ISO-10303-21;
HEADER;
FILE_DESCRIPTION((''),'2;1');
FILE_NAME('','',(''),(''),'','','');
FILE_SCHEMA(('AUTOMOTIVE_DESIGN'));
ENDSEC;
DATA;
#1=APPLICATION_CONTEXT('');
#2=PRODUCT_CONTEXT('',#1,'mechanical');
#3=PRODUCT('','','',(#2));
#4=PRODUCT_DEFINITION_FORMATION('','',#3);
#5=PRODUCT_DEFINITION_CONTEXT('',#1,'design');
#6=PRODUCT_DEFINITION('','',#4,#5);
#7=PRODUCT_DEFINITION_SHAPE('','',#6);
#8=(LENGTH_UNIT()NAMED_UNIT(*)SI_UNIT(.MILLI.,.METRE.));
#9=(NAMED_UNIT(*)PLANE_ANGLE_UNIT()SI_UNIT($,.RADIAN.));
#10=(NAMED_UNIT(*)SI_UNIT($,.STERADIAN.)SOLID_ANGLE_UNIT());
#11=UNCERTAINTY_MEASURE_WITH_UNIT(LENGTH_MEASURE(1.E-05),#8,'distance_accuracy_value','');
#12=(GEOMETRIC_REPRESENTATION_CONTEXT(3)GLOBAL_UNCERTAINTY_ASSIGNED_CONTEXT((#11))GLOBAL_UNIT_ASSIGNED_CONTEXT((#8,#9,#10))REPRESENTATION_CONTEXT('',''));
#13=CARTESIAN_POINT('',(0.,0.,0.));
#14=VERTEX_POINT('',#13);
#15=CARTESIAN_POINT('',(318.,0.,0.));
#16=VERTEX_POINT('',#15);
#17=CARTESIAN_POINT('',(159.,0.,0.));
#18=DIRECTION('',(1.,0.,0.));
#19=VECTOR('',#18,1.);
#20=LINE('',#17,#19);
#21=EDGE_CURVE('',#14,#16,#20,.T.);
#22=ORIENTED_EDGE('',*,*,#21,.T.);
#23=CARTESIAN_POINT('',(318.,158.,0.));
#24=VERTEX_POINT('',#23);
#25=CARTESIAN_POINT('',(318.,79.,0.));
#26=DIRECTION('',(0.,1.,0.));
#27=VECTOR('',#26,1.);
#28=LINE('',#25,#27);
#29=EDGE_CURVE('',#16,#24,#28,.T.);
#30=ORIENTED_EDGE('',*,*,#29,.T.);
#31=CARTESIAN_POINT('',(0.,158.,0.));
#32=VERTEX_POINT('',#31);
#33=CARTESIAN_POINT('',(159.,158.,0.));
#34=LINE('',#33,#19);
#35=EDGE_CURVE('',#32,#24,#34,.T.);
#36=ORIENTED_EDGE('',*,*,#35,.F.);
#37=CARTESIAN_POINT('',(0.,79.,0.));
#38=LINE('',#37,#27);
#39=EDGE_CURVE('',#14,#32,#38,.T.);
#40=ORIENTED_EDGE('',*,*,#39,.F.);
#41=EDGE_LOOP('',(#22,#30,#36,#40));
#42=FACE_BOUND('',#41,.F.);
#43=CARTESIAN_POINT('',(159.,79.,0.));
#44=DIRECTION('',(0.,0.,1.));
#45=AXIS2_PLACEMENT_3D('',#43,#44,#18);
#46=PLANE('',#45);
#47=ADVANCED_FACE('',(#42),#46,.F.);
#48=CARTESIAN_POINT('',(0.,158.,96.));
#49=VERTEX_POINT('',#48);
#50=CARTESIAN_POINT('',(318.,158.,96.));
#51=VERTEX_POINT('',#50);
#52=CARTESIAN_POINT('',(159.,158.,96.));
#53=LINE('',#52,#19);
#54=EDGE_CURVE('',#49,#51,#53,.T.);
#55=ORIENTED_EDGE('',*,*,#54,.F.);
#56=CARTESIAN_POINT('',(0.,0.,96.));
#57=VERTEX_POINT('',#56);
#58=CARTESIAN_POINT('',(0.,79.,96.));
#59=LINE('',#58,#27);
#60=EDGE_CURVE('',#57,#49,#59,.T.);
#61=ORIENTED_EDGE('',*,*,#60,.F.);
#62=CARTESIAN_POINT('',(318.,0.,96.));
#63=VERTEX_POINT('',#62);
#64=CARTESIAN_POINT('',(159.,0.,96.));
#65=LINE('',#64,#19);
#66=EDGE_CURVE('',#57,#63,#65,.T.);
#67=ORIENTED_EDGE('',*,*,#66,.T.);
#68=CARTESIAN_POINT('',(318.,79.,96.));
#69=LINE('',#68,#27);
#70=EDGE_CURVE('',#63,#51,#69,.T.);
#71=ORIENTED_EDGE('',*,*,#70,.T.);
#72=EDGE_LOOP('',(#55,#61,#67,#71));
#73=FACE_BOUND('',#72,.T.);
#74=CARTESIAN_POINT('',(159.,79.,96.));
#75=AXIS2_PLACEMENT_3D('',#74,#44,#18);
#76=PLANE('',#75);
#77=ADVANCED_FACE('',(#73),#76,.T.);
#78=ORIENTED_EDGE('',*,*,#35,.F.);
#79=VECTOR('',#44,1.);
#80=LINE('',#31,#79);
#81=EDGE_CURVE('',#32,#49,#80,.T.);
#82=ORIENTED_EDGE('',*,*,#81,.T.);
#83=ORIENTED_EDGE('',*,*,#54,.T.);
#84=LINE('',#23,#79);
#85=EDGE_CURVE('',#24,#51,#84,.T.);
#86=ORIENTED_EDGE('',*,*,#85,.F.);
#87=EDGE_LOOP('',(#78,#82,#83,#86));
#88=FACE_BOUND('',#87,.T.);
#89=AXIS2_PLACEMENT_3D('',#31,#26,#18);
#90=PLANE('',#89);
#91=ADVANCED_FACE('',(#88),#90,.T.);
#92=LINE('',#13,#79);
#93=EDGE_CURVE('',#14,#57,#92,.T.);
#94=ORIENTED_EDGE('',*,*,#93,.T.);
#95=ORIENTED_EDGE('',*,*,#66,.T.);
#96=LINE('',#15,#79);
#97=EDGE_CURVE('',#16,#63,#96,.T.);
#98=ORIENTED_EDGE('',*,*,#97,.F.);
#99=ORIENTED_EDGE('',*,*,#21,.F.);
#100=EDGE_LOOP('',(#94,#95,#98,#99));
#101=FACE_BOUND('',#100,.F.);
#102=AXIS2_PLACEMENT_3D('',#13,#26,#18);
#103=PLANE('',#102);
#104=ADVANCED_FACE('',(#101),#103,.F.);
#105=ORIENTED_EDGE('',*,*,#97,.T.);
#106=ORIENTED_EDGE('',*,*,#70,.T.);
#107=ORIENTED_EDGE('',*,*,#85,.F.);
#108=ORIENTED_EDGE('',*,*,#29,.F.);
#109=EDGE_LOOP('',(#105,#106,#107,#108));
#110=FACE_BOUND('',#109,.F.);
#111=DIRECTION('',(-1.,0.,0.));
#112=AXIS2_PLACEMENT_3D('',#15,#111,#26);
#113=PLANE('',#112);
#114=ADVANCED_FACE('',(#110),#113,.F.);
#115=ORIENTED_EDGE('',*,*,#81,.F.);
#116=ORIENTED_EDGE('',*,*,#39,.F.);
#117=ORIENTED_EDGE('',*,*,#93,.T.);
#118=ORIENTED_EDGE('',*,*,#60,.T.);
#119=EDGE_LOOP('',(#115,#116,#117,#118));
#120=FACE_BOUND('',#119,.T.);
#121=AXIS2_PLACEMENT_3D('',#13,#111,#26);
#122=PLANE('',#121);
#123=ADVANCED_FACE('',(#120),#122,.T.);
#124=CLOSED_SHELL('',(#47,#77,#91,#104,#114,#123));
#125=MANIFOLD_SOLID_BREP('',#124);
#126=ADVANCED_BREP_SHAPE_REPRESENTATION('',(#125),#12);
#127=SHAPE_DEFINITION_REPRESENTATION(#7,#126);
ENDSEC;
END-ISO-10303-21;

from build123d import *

# Parameters (mm, degrees)
F0_W     = 318
F0_H     = 158
F0_R     = 24
F1_DEPTH = 96


# Not quite as in the source:
# - a feature of the source that left no trace in its solid (it failed there, or was rolled back) is left out


with BuildPart() as f1:
    # F0 (on Top) → F1 (new body)
    with BuildSketch(Plane.XY):
        with Locations((159, 79)):
            Rectangle(F0_W, F0_H)
        with Locations((39, 39)):
            Circle(F0_R, mode=Mode.SUBTRACT)
        with Locations((119, 39)):
            Circle(F0_R, mode=Mode.SUBTRACT)
        with Locations((199, 39)):
            Circle(F0_R, mode=Mode.SUBTRACT)
        with Locations((279, 39)):
            Circle(F0_R, mode=Mode.SUBTRACT)
        with Locations((39, 119)):
            Circle(F0_R, mode=Mode.SUBTRACT)
        with Locations((119, 119)):
            Circle(F0_R, mode=Mode.SUBTRACT)
        with Locations((199, 119)):
            Circle(F0_R, mode=Mode.SUBTRACT)
        with Locations((279, 119)):
            Circle(F0_R, mode=Mode.SUBTRACT)
        with Locations((39, 39)):
            Circle(F0_R)
        with Locations((39, 119)):
            Circle(F0_R)
        with Locations((119, 119)):
            Circle(F0_R)
        with Locations((119, 39)):
            Circle(F0_R)
        with Locations((199, 119)):
            Circle(F0_R)
        with Locations((199, 39)):
            Circle(F0_R)
        with Locations((279, 39)):
            Circle(F0_R)
        with Locations((279, 119)):
            Circle(F0_R)
    extrude(amount=F1_DEPTH)


solid = f1.part
